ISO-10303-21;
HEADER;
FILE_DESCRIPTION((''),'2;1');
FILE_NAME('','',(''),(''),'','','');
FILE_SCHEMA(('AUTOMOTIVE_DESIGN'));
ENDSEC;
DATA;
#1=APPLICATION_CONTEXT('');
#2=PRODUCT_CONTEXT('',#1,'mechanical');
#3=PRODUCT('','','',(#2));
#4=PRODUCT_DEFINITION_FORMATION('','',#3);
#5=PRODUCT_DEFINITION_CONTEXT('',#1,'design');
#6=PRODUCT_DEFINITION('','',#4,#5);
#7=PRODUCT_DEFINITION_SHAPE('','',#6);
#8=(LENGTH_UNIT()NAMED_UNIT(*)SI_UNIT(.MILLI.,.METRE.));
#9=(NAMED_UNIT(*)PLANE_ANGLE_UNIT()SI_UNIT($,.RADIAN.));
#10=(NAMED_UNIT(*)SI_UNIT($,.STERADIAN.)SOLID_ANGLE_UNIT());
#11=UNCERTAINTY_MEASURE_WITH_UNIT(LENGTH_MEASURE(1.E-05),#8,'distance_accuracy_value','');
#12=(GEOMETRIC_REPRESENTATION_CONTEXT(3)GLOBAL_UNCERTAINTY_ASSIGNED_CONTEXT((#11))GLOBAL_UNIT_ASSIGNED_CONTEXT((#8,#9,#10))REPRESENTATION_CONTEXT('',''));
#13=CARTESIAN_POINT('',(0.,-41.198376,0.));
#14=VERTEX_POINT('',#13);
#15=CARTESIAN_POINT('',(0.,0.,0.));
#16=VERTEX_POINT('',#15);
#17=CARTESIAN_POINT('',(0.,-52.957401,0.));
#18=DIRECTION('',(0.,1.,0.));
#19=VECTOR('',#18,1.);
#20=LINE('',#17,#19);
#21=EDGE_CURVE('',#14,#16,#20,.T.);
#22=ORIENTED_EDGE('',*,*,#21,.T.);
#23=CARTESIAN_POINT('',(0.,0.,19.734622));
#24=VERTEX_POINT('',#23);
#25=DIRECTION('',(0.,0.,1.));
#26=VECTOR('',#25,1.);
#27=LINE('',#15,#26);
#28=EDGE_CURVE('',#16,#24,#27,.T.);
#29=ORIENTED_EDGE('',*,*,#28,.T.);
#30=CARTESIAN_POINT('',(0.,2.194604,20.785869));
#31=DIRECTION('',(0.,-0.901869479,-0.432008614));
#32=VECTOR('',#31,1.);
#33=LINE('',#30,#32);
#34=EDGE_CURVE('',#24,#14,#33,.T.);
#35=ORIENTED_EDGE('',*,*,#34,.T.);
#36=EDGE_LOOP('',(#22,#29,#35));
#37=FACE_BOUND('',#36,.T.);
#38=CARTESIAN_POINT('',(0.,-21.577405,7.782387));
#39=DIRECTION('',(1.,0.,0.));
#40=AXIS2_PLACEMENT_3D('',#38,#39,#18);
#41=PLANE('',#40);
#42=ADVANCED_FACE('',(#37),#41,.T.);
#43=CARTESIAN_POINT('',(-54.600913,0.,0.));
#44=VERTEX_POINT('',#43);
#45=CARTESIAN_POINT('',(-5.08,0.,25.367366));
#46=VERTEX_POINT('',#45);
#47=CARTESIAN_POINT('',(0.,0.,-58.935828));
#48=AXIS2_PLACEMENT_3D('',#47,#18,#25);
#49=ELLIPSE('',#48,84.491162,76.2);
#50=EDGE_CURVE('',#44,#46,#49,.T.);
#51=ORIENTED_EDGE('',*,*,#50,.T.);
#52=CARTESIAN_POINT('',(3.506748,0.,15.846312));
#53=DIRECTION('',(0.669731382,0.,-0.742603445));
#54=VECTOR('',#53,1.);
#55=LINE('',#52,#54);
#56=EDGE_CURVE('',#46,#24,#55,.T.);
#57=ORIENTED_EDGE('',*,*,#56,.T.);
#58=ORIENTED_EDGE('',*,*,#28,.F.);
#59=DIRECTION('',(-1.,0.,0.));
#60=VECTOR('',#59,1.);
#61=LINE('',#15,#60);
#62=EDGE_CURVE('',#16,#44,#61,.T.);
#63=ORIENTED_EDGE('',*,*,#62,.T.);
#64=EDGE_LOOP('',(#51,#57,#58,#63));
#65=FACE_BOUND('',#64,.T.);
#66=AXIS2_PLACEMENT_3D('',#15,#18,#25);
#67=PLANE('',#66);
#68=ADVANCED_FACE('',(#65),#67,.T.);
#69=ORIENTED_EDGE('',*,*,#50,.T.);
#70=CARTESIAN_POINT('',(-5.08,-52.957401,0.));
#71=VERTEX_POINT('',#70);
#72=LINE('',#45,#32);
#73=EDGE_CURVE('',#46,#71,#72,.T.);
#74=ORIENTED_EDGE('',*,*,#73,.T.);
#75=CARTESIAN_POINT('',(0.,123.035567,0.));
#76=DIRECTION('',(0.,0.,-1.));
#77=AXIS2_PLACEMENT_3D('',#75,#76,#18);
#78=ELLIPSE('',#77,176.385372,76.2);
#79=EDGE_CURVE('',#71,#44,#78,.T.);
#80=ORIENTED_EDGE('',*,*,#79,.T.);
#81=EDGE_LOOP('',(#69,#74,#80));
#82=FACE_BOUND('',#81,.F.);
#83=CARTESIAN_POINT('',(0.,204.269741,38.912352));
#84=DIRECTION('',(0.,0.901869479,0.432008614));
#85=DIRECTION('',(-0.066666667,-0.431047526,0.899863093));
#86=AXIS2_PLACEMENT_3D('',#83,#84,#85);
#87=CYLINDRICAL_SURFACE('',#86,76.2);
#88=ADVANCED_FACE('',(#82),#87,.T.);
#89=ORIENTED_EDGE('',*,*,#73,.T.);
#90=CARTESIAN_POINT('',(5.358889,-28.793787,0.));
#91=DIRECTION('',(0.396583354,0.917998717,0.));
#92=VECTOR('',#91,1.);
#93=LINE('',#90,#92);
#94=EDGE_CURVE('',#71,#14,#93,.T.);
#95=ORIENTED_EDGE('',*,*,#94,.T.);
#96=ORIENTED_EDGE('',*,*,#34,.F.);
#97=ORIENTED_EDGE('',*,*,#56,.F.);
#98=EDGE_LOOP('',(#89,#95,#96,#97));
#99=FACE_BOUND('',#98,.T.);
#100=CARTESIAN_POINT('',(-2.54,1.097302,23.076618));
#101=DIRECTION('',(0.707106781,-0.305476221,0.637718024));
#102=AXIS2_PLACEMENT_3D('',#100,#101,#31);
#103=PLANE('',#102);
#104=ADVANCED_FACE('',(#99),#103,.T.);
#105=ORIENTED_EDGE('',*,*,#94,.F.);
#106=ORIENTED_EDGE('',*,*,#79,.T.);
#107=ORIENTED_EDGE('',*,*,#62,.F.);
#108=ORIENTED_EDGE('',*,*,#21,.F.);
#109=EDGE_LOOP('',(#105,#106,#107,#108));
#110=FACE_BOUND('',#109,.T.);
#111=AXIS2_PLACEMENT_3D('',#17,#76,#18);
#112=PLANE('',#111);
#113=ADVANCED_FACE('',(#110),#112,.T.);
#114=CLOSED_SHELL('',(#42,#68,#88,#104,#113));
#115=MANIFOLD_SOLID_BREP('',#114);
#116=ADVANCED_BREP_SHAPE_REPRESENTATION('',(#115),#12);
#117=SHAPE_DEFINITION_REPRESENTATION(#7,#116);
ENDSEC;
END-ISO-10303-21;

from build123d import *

# Parameters (mm, degrees)
F3_DEPTH    = 76.2
F4_SIZE     = 5.08
F5_T1_DEPTH = 438.8719745558


# Not quite as in the source:
# - a fillet or chamfer that OpenCascade refuses, or shapes differently, is made with other operations: its cross-section is extruded or revolved along the edge and cut away or added
# - a feature of the source that left no trace in its solid (it failed there, or was rolled back) is left out


with BuildPart() as f3:
    # F2 (on Right) → F3 (new body)
    with BuildSketch(Plane.YZ):
        Polygon((-52.9574006796, 0), (0, 0), (0, 25.36736615), align=None)
    extrude(amount=-F3_DEPTH)

    # F4
    f4_edges = [f3.edges().sort_by_distance(p)[0] for p in [
        (0, -26.4787, 12.683683),
    ]]
    chamfer(f4_edges, length=F4_SIZE)

    # F5: fillet of radius 76.2 on 1 edges, made by hand

    # F5_s2 → F5_t1 (cut)
    with BuildSketch(Plane(origin=(0, 181.3074352717, 86.8489018954), x_dir=(1, 0, 0), z_dir=(0, -0.9018694789, -0.4320086144))):
        with BuildLine():
            ThreePointArc((-5.08, 22.8780532919), (-55.6486118425, -1.0979149163), (-76.2, -53.1524248074))
            Line((-76.2, -53.1524248074), (-76.2, 22.8780532919))
            Line((-76.2, 22.8780532919), (-5.08, 22.8780532919))
        make_face()
    extrude(amount=F5_T1_DEPTH, mode=Mode.SUBTRACT)


solid = f3.part
